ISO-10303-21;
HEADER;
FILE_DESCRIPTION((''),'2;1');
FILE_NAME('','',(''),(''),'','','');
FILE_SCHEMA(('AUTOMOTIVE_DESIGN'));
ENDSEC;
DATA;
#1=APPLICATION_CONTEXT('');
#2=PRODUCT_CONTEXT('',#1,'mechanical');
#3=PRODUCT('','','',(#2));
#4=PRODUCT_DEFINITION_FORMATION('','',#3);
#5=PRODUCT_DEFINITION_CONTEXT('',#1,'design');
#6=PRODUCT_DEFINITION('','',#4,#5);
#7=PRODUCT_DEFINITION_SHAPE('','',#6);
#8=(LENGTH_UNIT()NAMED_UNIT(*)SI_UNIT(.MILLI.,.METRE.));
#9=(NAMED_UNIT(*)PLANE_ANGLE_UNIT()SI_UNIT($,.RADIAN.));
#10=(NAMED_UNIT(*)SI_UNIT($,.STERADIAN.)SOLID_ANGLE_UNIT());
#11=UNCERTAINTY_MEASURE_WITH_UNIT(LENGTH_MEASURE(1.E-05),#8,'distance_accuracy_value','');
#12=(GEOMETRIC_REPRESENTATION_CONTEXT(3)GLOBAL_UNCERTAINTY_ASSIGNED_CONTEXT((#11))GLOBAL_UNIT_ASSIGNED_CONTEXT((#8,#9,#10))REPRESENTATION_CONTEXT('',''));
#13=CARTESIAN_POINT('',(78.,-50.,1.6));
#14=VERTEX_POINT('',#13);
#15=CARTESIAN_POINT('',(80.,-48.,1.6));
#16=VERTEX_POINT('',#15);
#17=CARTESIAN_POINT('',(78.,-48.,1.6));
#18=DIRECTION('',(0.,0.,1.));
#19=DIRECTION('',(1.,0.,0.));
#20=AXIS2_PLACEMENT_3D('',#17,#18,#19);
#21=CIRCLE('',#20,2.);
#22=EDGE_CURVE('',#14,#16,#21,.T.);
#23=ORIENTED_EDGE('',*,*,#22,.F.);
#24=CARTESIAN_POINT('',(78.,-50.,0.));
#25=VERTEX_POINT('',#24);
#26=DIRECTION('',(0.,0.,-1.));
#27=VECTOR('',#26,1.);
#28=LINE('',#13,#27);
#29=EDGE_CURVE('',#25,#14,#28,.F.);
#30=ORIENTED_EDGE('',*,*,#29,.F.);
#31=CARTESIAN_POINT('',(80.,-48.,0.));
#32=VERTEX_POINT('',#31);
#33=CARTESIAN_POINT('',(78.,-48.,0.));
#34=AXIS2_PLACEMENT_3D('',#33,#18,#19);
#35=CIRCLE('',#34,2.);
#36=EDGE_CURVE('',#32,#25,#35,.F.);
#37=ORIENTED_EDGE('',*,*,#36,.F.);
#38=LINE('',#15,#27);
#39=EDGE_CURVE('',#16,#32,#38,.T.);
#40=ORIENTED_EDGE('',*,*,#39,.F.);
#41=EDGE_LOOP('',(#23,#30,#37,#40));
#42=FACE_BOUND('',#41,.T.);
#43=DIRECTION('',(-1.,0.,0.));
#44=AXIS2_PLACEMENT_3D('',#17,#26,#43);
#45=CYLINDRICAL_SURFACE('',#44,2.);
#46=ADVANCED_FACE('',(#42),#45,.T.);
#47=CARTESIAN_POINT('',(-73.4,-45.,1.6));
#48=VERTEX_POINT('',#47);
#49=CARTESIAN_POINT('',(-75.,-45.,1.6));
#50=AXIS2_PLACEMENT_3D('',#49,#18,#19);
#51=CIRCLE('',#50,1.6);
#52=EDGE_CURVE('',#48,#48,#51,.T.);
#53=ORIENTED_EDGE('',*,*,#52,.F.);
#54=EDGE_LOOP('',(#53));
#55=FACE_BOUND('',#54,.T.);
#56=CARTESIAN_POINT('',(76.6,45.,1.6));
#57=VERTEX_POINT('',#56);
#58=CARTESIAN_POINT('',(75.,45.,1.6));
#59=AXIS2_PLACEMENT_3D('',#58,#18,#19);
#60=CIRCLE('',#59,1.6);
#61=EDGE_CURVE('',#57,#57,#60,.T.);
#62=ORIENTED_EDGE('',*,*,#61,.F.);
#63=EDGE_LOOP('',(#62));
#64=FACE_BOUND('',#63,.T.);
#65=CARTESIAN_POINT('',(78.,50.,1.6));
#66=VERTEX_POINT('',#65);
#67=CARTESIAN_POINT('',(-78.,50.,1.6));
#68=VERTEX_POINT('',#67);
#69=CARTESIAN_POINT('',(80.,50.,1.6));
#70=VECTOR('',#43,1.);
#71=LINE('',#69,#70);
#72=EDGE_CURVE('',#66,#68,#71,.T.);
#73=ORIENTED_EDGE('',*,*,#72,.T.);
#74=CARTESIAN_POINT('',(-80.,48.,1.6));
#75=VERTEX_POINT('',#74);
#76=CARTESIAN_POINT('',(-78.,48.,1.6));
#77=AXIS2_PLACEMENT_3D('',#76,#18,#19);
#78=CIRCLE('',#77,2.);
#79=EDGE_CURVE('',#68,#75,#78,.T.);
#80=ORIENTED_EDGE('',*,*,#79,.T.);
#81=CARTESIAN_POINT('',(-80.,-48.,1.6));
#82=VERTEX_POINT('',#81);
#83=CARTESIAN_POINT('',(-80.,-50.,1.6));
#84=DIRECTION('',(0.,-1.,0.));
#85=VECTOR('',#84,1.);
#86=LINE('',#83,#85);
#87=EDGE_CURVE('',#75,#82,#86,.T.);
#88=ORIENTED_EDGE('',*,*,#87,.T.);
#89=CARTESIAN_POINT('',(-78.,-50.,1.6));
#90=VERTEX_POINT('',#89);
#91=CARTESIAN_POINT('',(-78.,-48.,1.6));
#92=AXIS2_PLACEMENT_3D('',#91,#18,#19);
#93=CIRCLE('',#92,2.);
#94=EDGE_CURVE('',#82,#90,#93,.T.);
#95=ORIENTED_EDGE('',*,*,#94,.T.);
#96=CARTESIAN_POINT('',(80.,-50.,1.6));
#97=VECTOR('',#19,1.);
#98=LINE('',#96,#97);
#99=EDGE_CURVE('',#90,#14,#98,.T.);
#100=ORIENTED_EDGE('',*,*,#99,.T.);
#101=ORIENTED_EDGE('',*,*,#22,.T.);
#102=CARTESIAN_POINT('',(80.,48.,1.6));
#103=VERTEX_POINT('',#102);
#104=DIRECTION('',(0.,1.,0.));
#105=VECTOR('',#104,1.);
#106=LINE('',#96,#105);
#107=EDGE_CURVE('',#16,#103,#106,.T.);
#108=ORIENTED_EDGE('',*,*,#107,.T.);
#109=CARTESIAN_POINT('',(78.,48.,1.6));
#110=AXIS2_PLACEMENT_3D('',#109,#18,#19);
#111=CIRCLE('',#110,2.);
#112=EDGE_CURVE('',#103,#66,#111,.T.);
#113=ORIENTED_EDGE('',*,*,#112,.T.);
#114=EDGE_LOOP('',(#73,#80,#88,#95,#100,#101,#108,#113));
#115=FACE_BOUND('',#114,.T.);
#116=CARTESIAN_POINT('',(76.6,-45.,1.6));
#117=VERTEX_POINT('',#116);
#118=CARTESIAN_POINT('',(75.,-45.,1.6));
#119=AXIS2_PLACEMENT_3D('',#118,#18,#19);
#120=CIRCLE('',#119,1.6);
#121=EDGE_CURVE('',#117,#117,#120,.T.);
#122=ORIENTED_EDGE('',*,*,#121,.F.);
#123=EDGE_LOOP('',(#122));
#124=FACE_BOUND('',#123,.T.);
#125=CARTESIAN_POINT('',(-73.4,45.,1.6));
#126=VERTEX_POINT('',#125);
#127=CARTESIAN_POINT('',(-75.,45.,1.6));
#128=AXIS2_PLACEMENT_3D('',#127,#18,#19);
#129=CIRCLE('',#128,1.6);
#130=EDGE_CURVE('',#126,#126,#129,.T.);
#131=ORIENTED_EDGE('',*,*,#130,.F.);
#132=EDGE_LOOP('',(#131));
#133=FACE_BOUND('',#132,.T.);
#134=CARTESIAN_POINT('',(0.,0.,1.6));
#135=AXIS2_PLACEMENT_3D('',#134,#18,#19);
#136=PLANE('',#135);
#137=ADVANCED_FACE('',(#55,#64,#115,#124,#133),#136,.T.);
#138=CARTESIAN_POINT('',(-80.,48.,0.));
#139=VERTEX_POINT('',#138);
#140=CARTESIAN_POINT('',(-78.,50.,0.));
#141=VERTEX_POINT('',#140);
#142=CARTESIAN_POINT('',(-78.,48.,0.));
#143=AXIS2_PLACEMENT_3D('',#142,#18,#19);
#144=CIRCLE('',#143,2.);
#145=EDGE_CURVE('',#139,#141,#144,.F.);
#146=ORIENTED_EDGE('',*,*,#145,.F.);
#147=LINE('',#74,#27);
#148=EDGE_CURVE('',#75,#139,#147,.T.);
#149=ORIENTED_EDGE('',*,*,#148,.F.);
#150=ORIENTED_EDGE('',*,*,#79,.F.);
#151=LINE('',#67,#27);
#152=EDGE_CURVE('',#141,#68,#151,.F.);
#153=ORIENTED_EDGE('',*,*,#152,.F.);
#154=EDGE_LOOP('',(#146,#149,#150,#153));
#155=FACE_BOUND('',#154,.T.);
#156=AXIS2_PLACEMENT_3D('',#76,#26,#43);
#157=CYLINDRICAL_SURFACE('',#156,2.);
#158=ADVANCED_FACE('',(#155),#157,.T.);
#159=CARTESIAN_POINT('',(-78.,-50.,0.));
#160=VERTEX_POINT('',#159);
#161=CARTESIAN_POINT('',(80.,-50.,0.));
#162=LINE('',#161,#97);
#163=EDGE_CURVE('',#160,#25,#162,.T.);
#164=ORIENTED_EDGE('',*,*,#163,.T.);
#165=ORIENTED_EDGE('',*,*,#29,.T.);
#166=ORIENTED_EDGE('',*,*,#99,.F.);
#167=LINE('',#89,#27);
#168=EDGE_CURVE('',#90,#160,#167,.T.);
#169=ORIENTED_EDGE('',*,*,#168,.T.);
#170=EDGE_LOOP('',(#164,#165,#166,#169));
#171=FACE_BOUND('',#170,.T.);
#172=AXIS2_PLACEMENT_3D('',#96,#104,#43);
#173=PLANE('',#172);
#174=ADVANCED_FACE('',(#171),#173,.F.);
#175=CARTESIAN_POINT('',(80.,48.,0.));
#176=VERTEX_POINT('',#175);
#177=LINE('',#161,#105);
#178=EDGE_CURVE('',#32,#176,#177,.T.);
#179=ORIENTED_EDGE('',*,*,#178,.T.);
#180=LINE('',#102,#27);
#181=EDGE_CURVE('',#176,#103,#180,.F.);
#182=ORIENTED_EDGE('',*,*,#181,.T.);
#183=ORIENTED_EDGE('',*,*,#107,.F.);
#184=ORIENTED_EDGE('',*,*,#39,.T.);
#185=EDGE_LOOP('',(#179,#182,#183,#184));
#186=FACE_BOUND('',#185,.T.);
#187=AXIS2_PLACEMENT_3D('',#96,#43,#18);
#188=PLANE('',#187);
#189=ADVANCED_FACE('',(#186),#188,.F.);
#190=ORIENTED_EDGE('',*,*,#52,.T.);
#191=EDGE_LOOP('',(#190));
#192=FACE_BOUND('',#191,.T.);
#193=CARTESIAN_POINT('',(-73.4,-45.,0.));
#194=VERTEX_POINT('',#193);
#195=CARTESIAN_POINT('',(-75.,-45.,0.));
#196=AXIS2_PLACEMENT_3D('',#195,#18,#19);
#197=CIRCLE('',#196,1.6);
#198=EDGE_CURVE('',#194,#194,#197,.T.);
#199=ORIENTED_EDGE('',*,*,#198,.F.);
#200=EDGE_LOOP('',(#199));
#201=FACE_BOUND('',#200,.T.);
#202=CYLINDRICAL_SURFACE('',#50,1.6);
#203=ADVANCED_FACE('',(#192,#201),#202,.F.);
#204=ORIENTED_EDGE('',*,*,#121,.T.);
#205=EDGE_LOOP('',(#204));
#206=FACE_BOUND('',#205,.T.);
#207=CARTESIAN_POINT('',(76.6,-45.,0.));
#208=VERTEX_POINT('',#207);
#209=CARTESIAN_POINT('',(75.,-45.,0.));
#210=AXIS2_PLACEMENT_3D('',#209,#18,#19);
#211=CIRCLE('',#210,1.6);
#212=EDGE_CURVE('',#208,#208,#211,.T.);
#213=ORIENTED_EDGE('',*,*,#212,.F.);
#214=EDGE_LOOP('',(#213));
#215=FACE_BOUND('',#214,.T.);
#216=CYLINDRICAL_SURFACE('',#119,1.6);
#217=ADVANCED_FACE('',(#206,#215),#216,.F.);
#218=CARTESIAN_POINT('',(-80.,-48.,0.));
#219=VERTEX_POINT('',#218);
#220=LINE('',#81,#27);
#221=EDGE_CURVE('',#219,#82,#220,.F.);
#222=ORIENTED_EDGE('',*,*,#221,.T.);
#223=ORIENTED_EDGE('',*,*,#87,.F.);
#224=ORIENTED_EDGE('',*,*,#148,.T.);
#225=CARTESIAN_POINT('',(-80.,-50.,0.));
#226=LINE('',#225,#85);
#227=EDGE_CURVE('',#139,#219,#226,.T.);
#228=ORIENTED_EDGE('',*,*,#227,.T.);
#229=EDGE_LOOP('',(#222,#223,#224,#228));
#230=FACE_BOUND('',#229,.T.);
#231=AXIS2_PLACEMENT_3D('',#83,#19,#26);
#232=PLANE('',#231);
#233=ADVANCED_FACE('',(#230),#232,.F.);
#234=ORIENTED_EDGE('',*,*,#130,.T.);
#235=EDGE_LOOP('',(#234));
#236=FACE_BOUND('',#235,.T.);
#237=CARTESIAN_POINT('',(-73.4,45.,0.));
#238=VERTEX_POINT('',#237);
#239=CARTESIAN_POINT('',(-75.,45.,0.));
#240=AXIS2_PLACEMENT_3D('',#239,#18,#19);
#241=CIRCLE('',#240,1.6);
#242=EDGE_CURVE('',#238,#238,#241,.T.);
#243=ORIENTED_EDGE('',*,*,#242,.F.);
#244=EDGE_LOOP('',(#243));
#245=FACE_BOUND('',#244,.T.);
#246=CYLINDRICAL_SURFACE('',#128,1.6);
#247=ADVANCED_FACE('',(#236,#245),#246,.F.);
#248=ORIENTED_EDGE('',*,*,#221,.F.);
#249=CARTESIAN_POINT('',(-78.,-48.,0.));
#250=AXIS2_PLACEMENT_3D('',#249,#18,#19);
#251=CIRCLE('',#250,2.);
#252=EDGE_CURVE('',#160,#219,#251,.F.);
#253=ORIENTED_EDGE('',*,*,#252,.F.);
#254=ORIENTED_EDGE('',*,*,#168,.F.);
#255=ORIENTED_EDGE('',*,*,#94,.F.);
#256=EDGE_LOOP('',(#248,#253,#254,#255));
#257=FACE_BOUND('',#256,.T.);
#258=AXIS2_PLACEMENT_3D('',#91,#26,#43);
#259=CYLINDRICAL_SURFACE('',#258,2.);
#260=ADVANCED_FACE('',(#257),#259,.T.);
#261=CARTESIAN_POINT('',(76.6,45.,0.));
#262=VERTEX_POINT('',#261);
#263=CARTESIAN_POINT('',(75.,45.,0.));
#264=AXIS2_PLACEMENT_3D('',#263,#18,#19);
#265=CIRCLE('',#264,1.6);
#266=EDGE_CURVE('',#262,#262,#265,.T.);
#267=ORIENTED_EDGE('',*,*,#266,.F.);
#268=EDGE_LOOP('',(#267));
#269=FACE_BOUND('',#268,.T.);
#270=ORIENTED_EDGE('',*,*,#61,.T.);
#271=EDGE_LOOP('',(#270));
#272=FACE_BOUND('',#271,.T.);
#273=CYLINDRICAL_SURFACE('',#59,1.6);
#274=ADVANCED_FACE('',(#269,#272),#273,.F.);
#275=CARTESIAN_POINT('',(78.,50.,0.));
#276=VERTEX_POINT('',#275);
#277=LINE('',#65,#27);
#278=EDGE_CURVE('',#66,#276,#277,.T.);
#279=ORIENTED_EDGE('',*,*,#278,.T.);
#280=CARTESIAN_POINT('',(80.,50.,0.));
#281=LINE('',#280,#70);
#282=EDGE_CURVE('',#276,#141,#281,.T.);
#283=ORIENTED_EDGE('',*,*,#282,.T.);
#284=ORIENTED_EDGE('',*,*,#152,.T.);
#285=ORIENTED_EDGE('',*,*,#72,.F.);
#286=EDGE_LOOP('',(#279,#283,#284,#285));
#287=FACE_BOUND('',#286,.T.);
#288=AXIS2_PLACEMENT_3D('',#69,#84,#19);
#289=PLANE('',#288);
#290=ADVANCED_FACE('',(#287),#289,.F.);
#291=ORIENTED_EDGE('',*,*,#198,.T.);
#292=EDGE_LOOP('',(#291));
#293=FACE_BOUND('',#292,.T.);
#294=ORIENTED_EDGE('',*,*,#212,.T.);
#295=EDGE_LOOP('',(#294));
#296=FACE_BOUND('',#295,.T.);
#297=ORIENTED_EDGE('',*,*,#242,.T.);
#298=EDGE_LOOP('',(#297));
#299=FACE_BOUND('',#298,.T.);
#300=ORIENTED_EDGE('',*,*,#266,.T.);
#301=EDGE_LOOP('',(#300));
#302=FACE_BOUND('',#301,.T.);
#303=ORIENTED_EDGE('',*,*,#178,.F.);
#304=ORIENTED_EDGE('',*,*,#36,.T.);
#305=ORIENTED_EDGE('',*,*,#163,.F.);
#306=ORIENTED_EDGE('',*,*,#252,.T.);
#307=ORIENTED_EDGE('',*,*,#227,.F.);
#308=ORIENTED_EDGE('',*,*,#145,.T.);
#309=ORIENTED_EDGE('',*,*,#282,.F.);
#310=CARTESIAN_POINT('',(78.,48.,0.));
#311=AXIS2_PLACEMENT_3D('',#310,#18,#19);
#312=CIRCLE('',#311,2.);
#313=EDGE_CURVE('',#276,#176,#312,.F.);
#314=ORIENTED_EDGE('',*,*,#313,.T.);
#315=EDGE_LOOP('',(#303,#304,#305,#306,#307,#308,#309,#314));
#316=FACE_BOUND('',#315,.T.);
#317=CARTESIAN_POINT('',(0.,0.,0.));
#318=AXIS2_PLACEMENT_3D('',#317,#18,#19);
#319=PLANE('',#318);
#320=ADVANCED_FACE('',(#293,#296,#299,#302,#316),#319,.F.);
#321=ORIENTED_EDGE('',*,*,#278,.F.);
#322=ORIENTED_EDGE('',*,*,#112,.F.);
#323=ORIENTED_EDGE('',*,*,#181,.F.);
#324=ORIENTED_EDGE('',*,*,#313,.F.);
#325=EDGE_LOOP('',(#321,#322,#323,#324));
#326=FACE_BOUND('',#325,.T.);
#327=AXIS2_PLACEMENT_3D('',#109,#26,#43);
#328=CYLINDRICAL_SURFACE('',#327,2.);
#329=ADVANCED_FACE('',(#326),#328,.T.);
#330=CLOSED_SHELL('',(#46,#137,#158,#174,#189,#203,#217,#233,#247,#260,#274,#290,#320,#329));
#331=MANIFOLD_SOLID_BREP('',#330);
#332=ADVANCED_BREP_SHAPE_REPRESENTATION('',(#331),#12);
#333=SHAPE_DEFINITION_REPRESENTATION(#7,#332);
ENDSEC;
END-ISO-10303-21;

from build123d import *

# Parameters (mm, degrees)
SKETCH_1_W                 = 160
SKETCH_1_H                 = 100
EXTRUDE_1_DEPTH            = 1.6
FILLET_1_R                 = 2
HOLE_WIZARD_M3_1_OUTLINE_R = 1.6
HOLE_WIZARD_M3_1_DEPTH     = 1.6


# Read off the part's stored shape, not the designer's step: M3 すきま穴1
with BuildPart() as part:
    # ｽｹｯﾁ1 → ﾎﾞｽ - 押し出し1 (new body)
    with BuildSketch(Plane.XY):
        Rectangle(SKETCH_1_W, SKETCH_1_H)
    extrude(amount=EXTRUDE_1_DEPTH)

    # ﾌｨﾚｯﾄ1
    fillet_1_edges = [part.edges().sort_by_distance(p)[0] for p in [
        (-80, 50, 0.8),
        (80, 50, 0.8),
        (80, -50, 0.8),
        (-80, -50, 0.8),
    ]]
    fillet(fillet_1_edges, radius=FILLET_1_R)

    # M3 すきま穴1 outline → M3 すきま穴1 (cut)
    with BuildSketch(Plane.XY):
        with Locations((75, -45)):
            Circle(HOLE_WIZARD_M3_1_OUTLINE_R)
        with Locations((-75, 45)):
            Circle(HOLE_WIZARD_M3_1_OUTLINE_R)
        with Locations((-75, -45)):
            Circle(HOLE_WIZARD_M3_1_OUTLINE_R)
        with Locations((75, 45)):
            Circle(HOLE_WIZARD_M3_1_OUTLINE_R)
    extrude(amount=HOLE_WIZARD_M3_1_DEPTH, mode=Mode.SUBTRACT)


solid = part.part
